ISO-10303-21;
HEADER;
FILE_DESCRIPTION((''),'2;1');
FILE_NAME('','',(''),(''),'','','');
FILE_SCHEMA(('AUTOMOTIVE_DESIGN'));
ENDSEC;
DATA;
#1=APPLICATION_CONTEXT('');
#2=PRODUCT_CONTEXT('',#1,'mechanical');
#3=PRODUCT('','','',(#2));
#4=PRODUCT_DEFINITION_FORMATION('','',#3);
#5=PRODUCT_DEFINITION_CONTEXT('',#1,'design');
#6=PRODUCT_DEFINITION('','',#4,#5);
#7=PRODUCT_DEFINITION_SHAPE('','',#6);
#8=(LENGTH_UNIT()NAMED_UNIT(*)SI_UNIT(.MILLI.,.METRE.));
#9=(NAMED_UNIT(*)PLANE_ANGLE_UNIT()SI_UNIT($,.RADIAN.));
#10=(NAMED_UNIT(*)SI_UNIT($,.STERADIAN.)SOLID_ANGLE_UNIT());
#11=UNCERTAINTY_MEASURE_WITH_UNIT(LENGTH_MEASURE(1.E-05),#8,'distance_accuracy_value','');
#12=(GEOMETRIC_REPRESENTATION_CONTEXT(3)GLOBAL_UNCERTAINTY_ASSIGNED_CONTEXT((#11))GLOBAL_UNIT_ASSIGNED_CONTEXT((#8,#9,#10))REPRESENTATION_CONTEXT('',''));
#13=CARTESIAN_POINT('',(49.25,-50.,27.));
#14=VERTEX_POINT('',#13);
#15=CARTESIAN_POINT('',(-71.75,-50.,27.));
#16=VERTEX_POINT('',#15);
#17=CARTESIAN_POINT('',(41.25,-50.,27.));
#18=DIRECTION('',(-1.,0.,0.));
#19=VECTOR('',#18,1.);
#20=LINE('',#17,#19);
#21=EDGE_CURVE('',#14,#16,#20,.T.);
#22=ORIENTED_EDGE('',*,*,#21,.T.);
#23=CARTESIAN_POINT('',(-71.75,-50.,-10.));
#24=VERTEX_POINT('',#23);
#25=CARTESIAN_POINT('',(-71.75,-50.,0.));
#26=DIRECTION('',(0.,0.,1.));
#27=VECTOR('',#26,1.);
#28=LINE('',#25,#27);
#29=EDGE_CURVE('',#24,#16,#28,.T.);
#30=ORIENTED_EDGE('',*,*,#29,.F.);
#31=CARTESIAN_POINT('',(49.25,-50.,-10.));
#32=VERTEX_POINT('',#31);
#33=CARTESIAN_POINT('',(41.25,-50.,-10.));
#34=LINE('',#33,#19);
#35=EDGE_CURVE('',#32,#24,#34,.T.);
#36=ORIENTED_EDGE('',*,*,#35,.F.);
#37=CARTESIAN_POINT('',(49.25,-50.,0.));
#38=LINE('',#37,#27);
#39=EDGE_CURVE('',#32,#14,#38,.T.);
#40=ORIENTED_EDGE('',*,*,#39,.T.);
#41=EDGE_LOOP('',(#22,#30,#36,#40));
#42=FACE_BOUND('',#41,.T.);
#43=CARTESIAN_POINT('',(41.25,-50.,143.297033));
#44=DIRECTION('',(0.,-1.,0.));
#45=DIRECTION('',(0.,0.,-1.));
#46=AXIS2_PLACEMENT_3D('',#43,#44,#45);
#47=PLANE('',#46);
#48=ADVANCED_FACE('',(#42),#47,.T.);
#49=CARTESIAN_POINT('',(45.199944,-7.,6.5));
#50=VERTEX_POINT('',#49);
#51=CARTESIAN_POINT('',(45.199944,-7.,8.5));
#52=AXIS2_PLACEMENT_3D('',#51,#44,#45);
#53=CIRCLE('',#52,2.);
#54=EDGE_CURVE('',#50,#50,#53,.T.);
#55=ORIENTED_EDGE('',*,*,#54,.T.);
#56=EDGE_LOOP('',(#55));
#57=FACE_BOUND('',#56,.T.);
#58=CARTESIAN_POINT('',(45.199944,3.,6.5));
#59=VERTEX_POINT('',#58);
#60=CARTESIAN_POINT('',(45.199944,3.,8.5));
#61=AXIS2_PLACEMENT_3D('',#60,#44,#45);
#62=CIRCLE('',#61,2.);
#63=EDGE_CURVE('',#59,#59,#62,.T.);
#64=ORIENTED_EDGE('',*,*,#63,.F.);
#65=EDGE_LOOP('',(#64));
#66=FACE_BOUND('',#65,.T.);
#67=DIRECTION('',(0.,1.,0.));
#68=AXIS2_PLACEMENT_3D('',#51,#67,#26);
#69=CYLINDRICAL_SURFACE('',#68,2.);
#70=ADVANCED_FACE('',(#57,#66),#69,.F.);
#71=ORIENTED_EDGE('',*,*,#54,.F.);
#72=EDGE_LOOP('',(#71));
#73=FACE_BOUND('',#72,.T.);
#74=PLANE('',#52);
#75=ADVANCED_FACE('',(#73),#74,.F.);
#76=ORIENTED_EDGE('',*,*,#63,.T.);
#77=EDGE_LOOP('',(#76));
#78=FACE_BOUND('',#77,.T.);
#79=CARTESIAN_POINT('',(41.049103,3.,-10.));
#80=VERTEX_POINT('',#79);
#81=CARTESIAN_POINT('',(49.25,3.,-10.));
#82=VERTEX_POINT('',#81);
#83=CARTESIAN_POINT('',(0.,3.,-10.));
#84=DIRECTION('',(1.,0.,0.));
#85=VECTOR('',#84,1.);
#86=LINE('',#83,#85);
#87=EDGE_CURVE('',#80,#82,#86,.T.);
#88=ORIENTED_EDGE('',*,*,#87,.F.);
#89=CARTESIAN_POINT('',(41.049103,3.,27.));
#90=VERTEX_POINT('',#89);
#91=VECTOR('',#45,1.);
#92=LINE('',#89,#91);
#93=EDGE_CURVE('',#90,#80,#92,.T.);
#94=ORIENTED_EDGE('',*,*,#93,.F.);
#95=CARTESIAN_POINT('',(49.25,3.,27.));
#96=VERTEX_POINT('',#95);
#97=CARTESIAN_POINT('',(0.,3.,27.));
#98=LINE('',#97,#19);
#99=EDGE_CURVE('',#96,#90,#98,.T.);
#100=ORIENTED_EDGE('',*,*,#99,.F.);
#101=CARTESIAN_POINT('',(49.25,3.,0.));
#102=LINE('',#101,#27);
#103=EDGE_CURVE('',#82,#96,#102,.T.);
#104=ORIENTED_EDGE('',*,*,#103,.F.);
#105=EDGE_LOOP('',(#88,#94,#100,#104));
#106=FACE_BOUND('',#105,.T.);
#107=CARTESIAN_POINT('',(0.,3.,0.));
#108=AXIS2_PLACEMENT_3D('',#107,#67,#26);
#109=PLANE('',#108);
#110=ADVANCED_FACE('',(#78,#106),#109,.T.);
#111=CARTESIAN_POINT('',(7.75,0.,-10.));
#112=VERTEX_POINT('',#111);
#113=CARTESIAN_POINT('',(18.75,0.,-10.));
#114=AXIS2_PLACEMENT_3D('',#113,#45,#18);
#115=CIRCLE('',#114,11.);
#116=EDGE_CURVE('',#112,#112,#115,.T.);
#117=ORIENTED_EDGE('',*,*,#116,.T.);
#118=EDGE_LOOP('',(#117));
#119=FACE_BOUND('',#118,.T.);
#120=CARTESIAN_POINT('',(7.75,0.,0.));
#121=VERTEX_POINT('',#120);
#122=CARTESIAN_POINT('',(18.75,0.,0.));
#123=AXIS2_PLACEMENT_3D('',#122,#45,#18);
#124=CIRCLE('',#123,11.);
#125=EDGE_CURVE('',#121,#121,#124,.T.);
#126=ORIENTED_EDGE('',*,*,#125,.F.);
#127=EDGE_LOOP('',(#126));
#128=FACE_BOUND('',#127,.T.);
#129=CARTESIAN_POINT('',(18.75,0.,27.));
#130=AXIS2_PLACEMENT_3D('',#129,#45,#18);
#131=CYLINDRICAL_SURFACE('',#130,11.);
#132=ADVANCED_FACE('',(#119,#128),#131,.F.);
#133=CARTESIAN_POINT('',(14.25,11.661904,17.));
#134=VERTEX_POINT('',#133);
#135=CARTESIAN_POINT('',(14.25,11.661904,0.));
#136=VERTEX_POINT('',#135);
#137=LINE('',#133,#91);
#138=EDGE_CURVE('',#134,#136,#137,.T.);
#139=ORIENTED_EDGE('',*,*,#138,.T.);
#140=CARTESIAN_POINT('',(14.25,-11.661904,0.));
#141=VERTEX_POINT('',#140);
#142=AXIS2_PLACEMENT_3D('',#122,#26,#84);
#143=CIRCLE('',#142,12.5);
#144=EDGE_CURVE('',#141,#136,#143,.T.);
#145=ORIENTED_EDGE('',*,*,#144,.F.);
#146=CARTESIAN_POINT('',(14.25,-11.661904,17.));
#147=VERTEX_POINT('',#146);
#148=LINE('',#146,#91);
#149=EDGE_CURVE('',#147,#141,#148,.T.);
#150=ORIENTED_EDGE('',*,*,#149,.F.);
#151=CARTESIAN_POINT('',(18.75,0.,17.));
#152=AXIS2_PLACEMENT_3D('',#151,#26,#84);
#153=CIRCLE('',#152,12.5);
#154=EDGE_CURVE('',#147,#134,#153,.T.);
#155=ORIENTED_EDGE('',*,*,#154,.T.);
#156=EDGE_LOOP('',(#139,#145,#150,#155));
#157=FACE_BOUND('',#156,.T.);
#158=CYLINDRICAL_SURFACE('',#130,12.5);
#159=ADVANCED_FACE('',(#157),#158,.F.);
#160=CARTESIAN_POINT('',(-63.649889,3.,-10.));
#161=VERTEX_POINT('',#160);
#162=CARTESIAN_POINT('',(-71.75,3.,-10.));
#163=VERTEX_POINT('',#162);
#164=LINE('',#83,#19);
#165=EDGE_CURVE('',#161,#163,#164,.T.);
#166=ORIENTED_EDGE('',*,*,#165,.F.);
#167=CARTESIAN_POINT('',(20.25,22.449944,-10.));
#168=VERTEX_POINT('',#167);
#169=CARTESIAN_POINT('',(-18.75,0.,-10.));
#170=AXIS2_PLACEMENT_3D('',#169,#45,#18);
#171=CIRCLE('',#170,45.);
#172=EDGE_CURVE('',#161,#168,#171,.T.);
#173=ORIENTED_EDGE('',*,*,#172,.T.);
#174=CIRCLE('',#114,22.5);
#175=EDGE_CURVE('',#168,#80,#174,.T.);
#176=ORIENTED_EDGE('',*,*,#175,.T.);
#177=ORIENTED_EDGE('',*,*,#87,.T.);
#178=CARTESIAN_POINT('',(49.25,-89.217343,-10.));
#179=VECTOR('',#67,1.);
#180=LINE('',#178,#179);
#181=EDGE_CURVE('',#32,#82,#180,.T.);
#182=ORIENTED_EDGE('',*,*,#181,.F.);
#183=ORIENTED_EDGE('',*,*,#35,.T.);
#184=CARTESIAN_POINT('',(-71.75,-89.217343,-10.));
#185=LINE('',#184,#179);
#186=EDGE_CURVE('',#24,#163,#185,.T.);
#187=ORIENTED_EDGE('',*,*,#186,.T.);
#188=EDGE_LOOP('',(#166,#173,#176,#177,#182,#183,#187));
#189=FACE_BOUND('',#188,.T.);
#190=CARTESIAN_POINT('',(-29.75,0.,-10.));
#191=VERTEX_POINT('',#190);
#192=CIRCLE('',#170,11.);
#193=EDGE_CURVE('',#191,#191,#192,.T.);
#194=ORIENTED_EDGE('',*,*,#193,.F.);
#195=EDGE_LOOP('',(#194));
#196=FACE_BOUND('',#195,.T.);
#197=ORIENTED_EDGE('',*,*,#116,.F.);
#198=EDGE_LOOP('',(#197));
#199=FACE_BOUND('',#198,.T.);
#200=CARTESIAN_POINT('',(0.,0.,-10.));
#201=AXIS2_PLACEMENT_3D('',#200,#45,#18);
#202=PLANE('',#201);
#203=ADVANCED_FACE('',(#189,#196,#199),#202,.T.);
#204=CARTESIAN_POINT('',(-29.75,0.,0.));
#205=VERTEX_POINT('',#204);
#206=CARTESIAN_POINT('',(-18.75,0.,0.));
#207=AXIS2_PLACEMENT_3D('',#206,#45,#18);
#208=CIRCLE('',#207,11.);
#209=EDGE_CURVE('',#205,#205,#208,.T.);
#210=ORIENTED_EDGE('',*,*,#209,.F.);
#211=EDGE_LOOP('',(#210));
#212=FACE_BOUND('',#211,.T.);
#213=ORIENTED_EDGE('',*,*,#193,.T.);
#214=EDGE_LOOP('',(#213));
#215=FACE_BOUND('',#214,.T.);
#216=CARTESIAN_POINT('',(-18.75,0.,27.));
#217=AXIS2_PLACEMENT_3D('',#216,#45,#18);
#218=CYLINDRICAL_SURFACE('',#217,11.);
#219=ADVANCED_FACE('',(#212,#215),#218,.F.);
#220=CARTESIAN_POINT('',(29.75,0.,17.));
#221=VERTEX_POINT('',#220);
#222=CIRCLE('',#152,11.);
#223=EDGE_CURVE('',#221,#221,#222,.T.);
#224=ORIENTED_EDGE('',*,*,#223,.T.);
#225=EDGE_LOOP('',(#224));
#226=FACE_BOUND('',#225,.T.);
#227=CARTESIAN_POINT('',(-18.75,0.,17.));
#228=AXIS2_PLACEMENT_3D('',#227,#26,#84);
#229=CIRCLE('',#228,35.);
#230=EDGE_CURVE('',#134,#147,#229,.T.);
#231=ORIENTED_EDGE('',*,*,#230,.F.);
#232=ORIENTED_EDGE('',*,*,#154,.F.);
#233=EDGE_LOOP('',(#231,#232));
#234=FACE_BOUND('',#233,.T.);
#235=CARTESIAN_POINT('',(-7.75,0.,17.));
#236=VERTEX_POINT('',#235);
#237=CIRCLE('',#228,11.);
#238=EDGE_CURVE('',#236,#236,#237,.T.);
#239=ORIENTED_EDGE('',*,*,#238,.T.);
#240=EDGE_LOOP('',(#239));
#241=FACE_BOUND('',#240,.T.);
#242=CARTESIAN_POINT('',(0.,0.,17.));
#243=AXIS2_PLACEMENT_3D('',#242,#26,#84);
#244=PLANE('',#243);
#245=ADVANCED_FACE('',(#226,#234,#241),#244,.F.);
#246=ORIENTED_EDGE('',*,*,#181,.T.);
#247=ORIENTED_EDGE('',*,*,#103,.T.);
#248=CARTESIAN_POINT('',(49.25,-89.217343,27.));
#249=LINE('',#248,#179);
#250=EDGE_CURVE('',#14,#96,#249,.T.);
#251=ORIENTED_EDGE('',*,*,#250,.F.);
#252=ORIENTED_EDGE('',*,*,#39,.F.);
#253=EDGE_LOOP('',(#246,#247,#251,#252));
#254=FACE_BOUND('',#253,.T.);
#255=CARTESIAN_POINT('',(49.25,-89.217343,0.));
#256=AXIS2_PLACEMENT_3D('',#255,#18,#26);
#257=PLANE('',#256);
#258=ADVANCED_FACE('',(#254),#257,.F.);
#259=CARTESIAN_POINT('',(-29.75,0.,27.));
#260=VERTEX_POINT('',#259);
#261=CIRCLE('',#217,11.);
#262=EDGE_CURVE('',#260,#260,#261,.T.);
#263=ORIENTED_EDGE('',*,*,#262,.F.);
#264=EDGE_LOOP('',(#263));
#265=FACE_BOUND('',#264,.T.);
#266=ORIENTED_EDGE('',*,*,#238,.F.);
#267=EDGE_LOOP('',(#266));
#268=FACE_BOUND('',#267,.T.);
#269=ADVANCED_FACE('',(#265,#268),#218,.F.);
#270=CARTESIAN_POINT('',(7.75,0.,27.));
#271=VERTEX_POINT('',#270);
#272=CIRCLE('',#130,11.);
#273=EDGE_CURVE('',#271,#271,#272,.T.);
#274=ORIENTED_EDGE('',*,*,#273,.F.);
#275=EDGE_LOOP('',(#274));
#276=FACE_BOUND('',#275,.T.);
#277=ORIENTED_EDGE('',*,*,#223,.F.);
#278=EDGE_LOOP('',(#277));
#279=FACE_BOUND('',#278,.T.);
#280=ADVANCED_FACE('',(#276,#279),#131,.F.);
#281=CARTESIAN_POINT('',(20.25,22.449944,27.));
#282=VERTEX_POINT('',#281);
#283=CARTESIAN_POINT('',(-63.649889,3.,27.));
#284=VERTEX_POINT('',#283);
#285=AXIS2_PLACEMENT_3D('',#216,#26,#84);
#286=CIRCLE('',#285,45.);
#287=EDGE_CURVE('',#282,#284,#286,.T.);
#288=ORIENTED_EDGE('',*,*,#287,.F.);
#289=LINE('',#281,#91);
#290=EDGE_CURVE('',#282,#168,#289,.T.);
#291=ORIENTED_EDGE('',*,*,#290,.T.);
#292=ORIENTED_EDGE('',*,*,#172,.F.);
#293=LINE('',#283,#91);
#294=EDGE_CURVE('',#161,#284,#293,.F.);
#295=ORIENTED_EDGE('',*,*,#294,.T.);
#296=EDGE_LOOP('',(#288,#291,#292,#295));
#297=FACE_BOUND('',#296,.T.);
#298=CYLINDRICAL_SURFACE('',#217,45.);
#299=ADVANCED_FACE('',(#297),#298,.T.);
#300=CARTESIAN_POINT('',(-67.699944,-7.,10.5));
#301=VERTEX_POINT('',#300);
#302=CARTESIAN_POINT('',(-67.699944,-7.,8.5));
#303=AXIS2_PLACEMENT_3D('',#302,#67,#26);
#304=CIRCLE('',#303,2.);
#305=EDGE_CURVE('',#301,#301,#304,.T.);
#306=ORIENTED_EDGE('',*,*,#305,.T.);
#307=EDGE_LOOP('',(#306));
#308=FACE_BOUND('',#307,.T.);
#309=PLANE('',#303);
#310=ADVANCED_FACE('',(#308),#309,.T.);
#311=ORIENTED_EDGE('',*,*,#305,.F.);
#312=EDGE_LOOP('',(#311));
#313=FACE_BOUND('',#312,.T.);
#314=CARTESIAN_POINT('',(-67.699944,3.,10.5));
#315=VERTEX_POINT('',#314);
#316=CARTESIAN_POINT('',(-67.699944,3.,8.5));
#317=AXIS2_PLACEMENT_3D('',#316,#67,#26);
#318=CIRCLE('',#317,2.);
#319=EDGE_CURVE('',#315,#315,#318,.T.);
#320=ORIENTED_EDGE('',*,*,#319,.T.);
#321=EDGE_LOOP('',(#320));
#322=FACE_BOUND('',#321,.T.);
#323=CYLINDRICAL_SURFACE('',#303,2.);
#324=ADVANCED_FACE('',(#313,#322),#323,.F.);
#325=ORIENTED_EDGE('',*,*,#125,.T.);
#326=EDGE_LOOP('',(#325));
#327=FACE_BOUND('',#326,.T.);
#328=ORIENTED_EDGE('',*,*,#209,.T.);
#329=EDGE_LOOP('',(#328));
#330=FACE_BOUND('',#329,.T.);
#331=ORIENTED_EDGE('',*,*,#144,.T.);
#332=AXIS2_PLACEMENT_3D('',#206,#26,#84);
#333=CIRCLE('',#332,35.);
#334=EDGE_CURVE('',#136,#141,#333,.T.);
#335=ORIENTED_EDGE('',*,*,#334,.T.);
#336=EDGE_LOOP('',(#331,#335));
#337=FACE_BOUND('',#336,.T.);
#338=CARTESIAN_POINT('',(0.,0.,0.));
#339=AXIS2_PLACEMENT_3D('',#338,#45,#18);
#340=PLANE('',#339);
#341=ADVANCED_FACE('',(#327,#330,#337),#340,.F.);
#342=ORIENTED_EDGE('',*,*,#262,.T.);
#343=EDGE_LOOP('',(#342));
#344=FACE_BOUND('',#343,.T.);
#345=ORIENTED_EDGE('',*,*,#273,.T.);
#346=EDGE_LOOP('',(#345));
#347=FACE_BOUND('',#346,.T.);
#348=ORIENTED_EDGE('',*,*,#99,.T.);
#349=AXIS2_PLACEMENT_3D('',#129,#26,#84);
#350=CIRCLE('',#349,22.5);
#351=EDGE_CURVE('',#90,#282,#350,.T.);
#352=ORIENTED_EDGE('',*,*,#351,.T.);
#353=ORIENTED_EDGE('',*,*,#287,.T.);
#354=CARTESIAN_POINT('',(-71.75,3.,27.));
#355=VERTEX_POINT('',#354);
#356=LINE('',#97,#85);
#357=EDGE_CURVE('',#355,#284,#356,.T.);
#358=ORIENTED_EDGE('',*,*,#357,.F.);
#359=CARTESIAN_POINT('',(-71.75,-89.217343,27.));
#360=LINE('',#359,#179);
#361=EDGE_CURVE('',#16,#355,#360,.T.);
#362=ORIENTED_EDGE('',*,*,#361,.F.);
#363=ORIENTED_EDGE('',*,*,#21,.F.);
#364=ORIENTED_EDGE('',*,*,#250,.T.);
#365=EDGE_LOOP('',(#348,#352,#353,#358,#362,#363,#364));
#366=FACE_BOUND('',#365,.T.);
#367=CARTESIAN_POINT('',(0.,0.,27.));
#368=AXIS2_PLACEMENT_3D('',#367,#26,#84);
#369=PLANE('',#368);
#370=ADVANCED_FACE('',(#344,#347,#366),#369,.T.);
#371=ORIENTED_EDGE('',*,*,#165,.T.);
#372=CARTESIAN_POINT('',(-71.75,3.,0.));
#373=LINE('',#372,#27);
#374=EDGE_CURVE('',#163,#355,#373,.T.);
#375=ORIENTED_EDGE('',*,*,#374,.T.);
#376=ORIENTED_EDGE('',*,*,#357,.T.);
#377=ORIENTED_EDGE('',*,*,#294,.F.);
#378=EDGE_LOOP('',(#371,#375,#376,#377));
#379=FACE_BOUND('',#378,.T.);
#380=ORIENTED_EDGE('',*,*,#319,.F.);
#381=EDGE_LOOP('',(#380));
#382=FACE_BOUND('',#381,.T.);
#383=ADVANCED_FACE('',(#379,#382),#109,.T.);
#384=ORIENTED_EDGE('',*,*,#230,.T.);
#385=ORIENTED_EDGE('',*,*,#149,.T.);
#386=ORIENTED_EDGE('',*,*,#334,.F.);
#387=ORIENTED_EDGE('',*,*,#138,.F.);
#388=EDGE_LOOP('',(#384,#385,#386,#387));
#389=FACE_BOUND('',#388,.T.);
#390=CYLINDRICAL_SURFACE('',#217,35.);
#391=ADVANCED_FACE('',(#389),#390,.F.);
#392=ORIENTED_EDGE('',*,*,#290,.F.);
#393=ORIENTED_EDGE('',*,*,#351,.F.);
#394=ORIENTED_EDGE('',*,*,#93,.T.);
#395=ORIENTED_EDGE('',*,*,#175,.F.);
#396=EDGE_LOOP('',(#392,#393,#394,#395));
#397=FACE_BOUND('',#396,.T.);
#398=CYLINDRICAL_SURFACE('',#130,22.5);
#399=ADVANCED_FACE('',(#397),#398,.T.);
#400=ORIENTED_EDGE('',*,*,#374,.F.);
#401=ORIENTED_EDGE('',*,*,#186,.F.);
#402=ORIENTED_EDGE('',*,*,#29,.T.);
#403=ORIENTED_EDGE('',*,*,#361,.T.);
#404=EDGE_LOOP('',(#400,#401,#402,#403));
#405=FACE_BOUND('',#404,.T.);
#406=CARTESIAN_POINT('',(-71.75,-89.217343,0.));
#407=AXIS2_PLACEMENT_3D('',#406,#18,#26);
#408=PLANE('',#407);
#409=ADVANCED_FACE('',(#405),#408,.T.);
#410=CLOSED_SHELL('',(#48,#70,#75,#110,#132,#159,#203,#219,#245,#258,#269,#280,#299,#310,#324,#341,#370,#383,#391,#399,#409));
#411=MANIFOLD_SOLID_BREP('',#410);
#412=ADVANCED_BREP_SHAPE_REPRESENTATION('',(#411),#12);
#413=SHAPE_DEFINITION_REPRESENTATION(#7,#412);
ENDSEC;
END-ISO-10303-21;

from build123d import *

# Parameters (mm, degrees)
BOSS_EXTRUDE2_DEPTH      = 27
SHELL5_DEPTH             = 17
BOSS_EXTRUDE3_START      = 10
BOSS_EXTRUDE3_DEPTH      = 10
SKETCH5_R                = 11
CUT_EXTRUDE2_DEPTH       = 87.360074687
BOSS_EXTRUDE4_DEPTH      = 37
BOSS_EXTRUDE5_DEPTH      = 3
BOSS_EXTRUDE5_DEPTH_BACK = 50
SKETCH10_R               = 2
CUT_EXTRUDE3_DEPTH       = 10


# Read off the part's stored shape, not the designer's step: Shell5
with BuildPart() as part:
    # Sketch1 → Boss-Extrude2 (new body)
    with BuildSketch(Plane.XY):
        with BuildLine():
            ThreePointArc((20.25, 22.449944321), (-63.75, 0), (20.25, -22.449944321))
            ThreePointArc((20.25, -22.449944321), (41.25, 0), (20.25, 22.449944321))
        make_face()
    extrude(amount=BOSS_EXTRUDE2_DEPTH)

    # Shell5 outline → Shell5 (cut)
    with BuildSketch(Plane.XY):
        with BuildLine():
            ThreePointArc((14.25, -11.66190379), (31.25, 0), (14.25, 11.66190379))
            ThreePointArc((14.25, 11.66190379), (-53.75, 0), (14.25, -11.66190379))
        make_face()
    extrude(amount=SHELL5_DEPTH, mode=Mode.SUBTRACT)

    # Sketch4 → Boss-Extrude3 (add)
    with BuildSketch(Plane(origin=(0, 0, 0), x_dir=(-1, 0, 0), z_dir=(0, 0, -1)).offset(BOSS_EXTRUDE3_START)):
        with BuildLine():
            ThreePointArc((-20.25, 22.449944321), (-41.25, 0), (-20.25, -22.449944321))
            ThreePointArc((-20.25, -22.449944321), (63.75, 0), (-20.25, 22.449944321))
        make_face()
    extrude(amount=-BOSS_EXTRUDE3_DEPTH)

    # Sketch5 → Cut-Extrude2 (cut, through all)
    with BuildSketch(Plane(origin=(0, 0, -10), x_dir=(-1, 0, 0), z_dir=(0, 0, -1))):
        with Locations((-18.75, 0)):
            Circle(SKETCH5_R)
        with Locations((18.75, 0)):
            Circle(SKETCH5_R)
    extrude(amount=-CUT_EXTRUDE2_DEPTH, mode=Mode.SUBTRACT)

    # Sketch8 → Boss-Extrude4 (add)
    with BuildSketch(Plane(origin=(0, 0, -10), x_dir=(-1, 0, 0), z_dir=(0, 0, -1))):
        with BuildLine():
            Line((-41.25, 0), (-41.25, -50))
            Line((-41.25, -50), (63.75, -50))
            Line((63.75, -50), (63.75, 0))
            ThreePointArc((63.75, 0), (30.368950039, -43.474130239), (-20.25, -22.449944321))
            ThreePointArc((-20.25, -22.449944321), (-35.181676725, -15.370426149), (-41.25, 0))
        make_face()
    extrude(amount=-BOSS_EXTRUDE4_DEPTH)

    # Sketch9 → Boss-Extrude5 (add, two sides: drawn at the far end of the back side and taken through both)
    with BuildSketch(Plane(origin=(0, 0, 0), x_dir=(1, 0, 0), z_dir=(0, 1, 0)).offset(-BOSS_EXTRUDE5_DEPTH_BACK)):
        Polygon((-71.75, -27), (-58.75, -27), (-58.75, -8.5), (-58.75, 10), (-71.75, 10), align=None)
        Polygon((36.25, -8.5), (36.25, 10), (49.25, 10), (49.25, -27), (36.25, -27), align=None)
    extrude(amount=BOSS_EXTRUDE5_DEPTH + BOSS_EXTRUDE5_DEPTH_BACK)

    # Sketch10 → Cut-Extrude3 (cut)
    with BuildSketch(Plane(origin=(0, 3, 0), x_dir=(1, 0, 0), z_dir=(0, 1, 0))):
        with Locations(Location((-67.699944321, -8.5, 0), (0, 0, 270))):
            Circle(SKETCH10_R)
        with Locations(Location((45.199944321, -8.5, 0), (0, 0, 90))):
            Circle(SKETCH10_R)
    extrude(amount=-CUT_EXTRUDE3_DEPTH, mode=Mode.SUBTRACT)


solid = part.part
